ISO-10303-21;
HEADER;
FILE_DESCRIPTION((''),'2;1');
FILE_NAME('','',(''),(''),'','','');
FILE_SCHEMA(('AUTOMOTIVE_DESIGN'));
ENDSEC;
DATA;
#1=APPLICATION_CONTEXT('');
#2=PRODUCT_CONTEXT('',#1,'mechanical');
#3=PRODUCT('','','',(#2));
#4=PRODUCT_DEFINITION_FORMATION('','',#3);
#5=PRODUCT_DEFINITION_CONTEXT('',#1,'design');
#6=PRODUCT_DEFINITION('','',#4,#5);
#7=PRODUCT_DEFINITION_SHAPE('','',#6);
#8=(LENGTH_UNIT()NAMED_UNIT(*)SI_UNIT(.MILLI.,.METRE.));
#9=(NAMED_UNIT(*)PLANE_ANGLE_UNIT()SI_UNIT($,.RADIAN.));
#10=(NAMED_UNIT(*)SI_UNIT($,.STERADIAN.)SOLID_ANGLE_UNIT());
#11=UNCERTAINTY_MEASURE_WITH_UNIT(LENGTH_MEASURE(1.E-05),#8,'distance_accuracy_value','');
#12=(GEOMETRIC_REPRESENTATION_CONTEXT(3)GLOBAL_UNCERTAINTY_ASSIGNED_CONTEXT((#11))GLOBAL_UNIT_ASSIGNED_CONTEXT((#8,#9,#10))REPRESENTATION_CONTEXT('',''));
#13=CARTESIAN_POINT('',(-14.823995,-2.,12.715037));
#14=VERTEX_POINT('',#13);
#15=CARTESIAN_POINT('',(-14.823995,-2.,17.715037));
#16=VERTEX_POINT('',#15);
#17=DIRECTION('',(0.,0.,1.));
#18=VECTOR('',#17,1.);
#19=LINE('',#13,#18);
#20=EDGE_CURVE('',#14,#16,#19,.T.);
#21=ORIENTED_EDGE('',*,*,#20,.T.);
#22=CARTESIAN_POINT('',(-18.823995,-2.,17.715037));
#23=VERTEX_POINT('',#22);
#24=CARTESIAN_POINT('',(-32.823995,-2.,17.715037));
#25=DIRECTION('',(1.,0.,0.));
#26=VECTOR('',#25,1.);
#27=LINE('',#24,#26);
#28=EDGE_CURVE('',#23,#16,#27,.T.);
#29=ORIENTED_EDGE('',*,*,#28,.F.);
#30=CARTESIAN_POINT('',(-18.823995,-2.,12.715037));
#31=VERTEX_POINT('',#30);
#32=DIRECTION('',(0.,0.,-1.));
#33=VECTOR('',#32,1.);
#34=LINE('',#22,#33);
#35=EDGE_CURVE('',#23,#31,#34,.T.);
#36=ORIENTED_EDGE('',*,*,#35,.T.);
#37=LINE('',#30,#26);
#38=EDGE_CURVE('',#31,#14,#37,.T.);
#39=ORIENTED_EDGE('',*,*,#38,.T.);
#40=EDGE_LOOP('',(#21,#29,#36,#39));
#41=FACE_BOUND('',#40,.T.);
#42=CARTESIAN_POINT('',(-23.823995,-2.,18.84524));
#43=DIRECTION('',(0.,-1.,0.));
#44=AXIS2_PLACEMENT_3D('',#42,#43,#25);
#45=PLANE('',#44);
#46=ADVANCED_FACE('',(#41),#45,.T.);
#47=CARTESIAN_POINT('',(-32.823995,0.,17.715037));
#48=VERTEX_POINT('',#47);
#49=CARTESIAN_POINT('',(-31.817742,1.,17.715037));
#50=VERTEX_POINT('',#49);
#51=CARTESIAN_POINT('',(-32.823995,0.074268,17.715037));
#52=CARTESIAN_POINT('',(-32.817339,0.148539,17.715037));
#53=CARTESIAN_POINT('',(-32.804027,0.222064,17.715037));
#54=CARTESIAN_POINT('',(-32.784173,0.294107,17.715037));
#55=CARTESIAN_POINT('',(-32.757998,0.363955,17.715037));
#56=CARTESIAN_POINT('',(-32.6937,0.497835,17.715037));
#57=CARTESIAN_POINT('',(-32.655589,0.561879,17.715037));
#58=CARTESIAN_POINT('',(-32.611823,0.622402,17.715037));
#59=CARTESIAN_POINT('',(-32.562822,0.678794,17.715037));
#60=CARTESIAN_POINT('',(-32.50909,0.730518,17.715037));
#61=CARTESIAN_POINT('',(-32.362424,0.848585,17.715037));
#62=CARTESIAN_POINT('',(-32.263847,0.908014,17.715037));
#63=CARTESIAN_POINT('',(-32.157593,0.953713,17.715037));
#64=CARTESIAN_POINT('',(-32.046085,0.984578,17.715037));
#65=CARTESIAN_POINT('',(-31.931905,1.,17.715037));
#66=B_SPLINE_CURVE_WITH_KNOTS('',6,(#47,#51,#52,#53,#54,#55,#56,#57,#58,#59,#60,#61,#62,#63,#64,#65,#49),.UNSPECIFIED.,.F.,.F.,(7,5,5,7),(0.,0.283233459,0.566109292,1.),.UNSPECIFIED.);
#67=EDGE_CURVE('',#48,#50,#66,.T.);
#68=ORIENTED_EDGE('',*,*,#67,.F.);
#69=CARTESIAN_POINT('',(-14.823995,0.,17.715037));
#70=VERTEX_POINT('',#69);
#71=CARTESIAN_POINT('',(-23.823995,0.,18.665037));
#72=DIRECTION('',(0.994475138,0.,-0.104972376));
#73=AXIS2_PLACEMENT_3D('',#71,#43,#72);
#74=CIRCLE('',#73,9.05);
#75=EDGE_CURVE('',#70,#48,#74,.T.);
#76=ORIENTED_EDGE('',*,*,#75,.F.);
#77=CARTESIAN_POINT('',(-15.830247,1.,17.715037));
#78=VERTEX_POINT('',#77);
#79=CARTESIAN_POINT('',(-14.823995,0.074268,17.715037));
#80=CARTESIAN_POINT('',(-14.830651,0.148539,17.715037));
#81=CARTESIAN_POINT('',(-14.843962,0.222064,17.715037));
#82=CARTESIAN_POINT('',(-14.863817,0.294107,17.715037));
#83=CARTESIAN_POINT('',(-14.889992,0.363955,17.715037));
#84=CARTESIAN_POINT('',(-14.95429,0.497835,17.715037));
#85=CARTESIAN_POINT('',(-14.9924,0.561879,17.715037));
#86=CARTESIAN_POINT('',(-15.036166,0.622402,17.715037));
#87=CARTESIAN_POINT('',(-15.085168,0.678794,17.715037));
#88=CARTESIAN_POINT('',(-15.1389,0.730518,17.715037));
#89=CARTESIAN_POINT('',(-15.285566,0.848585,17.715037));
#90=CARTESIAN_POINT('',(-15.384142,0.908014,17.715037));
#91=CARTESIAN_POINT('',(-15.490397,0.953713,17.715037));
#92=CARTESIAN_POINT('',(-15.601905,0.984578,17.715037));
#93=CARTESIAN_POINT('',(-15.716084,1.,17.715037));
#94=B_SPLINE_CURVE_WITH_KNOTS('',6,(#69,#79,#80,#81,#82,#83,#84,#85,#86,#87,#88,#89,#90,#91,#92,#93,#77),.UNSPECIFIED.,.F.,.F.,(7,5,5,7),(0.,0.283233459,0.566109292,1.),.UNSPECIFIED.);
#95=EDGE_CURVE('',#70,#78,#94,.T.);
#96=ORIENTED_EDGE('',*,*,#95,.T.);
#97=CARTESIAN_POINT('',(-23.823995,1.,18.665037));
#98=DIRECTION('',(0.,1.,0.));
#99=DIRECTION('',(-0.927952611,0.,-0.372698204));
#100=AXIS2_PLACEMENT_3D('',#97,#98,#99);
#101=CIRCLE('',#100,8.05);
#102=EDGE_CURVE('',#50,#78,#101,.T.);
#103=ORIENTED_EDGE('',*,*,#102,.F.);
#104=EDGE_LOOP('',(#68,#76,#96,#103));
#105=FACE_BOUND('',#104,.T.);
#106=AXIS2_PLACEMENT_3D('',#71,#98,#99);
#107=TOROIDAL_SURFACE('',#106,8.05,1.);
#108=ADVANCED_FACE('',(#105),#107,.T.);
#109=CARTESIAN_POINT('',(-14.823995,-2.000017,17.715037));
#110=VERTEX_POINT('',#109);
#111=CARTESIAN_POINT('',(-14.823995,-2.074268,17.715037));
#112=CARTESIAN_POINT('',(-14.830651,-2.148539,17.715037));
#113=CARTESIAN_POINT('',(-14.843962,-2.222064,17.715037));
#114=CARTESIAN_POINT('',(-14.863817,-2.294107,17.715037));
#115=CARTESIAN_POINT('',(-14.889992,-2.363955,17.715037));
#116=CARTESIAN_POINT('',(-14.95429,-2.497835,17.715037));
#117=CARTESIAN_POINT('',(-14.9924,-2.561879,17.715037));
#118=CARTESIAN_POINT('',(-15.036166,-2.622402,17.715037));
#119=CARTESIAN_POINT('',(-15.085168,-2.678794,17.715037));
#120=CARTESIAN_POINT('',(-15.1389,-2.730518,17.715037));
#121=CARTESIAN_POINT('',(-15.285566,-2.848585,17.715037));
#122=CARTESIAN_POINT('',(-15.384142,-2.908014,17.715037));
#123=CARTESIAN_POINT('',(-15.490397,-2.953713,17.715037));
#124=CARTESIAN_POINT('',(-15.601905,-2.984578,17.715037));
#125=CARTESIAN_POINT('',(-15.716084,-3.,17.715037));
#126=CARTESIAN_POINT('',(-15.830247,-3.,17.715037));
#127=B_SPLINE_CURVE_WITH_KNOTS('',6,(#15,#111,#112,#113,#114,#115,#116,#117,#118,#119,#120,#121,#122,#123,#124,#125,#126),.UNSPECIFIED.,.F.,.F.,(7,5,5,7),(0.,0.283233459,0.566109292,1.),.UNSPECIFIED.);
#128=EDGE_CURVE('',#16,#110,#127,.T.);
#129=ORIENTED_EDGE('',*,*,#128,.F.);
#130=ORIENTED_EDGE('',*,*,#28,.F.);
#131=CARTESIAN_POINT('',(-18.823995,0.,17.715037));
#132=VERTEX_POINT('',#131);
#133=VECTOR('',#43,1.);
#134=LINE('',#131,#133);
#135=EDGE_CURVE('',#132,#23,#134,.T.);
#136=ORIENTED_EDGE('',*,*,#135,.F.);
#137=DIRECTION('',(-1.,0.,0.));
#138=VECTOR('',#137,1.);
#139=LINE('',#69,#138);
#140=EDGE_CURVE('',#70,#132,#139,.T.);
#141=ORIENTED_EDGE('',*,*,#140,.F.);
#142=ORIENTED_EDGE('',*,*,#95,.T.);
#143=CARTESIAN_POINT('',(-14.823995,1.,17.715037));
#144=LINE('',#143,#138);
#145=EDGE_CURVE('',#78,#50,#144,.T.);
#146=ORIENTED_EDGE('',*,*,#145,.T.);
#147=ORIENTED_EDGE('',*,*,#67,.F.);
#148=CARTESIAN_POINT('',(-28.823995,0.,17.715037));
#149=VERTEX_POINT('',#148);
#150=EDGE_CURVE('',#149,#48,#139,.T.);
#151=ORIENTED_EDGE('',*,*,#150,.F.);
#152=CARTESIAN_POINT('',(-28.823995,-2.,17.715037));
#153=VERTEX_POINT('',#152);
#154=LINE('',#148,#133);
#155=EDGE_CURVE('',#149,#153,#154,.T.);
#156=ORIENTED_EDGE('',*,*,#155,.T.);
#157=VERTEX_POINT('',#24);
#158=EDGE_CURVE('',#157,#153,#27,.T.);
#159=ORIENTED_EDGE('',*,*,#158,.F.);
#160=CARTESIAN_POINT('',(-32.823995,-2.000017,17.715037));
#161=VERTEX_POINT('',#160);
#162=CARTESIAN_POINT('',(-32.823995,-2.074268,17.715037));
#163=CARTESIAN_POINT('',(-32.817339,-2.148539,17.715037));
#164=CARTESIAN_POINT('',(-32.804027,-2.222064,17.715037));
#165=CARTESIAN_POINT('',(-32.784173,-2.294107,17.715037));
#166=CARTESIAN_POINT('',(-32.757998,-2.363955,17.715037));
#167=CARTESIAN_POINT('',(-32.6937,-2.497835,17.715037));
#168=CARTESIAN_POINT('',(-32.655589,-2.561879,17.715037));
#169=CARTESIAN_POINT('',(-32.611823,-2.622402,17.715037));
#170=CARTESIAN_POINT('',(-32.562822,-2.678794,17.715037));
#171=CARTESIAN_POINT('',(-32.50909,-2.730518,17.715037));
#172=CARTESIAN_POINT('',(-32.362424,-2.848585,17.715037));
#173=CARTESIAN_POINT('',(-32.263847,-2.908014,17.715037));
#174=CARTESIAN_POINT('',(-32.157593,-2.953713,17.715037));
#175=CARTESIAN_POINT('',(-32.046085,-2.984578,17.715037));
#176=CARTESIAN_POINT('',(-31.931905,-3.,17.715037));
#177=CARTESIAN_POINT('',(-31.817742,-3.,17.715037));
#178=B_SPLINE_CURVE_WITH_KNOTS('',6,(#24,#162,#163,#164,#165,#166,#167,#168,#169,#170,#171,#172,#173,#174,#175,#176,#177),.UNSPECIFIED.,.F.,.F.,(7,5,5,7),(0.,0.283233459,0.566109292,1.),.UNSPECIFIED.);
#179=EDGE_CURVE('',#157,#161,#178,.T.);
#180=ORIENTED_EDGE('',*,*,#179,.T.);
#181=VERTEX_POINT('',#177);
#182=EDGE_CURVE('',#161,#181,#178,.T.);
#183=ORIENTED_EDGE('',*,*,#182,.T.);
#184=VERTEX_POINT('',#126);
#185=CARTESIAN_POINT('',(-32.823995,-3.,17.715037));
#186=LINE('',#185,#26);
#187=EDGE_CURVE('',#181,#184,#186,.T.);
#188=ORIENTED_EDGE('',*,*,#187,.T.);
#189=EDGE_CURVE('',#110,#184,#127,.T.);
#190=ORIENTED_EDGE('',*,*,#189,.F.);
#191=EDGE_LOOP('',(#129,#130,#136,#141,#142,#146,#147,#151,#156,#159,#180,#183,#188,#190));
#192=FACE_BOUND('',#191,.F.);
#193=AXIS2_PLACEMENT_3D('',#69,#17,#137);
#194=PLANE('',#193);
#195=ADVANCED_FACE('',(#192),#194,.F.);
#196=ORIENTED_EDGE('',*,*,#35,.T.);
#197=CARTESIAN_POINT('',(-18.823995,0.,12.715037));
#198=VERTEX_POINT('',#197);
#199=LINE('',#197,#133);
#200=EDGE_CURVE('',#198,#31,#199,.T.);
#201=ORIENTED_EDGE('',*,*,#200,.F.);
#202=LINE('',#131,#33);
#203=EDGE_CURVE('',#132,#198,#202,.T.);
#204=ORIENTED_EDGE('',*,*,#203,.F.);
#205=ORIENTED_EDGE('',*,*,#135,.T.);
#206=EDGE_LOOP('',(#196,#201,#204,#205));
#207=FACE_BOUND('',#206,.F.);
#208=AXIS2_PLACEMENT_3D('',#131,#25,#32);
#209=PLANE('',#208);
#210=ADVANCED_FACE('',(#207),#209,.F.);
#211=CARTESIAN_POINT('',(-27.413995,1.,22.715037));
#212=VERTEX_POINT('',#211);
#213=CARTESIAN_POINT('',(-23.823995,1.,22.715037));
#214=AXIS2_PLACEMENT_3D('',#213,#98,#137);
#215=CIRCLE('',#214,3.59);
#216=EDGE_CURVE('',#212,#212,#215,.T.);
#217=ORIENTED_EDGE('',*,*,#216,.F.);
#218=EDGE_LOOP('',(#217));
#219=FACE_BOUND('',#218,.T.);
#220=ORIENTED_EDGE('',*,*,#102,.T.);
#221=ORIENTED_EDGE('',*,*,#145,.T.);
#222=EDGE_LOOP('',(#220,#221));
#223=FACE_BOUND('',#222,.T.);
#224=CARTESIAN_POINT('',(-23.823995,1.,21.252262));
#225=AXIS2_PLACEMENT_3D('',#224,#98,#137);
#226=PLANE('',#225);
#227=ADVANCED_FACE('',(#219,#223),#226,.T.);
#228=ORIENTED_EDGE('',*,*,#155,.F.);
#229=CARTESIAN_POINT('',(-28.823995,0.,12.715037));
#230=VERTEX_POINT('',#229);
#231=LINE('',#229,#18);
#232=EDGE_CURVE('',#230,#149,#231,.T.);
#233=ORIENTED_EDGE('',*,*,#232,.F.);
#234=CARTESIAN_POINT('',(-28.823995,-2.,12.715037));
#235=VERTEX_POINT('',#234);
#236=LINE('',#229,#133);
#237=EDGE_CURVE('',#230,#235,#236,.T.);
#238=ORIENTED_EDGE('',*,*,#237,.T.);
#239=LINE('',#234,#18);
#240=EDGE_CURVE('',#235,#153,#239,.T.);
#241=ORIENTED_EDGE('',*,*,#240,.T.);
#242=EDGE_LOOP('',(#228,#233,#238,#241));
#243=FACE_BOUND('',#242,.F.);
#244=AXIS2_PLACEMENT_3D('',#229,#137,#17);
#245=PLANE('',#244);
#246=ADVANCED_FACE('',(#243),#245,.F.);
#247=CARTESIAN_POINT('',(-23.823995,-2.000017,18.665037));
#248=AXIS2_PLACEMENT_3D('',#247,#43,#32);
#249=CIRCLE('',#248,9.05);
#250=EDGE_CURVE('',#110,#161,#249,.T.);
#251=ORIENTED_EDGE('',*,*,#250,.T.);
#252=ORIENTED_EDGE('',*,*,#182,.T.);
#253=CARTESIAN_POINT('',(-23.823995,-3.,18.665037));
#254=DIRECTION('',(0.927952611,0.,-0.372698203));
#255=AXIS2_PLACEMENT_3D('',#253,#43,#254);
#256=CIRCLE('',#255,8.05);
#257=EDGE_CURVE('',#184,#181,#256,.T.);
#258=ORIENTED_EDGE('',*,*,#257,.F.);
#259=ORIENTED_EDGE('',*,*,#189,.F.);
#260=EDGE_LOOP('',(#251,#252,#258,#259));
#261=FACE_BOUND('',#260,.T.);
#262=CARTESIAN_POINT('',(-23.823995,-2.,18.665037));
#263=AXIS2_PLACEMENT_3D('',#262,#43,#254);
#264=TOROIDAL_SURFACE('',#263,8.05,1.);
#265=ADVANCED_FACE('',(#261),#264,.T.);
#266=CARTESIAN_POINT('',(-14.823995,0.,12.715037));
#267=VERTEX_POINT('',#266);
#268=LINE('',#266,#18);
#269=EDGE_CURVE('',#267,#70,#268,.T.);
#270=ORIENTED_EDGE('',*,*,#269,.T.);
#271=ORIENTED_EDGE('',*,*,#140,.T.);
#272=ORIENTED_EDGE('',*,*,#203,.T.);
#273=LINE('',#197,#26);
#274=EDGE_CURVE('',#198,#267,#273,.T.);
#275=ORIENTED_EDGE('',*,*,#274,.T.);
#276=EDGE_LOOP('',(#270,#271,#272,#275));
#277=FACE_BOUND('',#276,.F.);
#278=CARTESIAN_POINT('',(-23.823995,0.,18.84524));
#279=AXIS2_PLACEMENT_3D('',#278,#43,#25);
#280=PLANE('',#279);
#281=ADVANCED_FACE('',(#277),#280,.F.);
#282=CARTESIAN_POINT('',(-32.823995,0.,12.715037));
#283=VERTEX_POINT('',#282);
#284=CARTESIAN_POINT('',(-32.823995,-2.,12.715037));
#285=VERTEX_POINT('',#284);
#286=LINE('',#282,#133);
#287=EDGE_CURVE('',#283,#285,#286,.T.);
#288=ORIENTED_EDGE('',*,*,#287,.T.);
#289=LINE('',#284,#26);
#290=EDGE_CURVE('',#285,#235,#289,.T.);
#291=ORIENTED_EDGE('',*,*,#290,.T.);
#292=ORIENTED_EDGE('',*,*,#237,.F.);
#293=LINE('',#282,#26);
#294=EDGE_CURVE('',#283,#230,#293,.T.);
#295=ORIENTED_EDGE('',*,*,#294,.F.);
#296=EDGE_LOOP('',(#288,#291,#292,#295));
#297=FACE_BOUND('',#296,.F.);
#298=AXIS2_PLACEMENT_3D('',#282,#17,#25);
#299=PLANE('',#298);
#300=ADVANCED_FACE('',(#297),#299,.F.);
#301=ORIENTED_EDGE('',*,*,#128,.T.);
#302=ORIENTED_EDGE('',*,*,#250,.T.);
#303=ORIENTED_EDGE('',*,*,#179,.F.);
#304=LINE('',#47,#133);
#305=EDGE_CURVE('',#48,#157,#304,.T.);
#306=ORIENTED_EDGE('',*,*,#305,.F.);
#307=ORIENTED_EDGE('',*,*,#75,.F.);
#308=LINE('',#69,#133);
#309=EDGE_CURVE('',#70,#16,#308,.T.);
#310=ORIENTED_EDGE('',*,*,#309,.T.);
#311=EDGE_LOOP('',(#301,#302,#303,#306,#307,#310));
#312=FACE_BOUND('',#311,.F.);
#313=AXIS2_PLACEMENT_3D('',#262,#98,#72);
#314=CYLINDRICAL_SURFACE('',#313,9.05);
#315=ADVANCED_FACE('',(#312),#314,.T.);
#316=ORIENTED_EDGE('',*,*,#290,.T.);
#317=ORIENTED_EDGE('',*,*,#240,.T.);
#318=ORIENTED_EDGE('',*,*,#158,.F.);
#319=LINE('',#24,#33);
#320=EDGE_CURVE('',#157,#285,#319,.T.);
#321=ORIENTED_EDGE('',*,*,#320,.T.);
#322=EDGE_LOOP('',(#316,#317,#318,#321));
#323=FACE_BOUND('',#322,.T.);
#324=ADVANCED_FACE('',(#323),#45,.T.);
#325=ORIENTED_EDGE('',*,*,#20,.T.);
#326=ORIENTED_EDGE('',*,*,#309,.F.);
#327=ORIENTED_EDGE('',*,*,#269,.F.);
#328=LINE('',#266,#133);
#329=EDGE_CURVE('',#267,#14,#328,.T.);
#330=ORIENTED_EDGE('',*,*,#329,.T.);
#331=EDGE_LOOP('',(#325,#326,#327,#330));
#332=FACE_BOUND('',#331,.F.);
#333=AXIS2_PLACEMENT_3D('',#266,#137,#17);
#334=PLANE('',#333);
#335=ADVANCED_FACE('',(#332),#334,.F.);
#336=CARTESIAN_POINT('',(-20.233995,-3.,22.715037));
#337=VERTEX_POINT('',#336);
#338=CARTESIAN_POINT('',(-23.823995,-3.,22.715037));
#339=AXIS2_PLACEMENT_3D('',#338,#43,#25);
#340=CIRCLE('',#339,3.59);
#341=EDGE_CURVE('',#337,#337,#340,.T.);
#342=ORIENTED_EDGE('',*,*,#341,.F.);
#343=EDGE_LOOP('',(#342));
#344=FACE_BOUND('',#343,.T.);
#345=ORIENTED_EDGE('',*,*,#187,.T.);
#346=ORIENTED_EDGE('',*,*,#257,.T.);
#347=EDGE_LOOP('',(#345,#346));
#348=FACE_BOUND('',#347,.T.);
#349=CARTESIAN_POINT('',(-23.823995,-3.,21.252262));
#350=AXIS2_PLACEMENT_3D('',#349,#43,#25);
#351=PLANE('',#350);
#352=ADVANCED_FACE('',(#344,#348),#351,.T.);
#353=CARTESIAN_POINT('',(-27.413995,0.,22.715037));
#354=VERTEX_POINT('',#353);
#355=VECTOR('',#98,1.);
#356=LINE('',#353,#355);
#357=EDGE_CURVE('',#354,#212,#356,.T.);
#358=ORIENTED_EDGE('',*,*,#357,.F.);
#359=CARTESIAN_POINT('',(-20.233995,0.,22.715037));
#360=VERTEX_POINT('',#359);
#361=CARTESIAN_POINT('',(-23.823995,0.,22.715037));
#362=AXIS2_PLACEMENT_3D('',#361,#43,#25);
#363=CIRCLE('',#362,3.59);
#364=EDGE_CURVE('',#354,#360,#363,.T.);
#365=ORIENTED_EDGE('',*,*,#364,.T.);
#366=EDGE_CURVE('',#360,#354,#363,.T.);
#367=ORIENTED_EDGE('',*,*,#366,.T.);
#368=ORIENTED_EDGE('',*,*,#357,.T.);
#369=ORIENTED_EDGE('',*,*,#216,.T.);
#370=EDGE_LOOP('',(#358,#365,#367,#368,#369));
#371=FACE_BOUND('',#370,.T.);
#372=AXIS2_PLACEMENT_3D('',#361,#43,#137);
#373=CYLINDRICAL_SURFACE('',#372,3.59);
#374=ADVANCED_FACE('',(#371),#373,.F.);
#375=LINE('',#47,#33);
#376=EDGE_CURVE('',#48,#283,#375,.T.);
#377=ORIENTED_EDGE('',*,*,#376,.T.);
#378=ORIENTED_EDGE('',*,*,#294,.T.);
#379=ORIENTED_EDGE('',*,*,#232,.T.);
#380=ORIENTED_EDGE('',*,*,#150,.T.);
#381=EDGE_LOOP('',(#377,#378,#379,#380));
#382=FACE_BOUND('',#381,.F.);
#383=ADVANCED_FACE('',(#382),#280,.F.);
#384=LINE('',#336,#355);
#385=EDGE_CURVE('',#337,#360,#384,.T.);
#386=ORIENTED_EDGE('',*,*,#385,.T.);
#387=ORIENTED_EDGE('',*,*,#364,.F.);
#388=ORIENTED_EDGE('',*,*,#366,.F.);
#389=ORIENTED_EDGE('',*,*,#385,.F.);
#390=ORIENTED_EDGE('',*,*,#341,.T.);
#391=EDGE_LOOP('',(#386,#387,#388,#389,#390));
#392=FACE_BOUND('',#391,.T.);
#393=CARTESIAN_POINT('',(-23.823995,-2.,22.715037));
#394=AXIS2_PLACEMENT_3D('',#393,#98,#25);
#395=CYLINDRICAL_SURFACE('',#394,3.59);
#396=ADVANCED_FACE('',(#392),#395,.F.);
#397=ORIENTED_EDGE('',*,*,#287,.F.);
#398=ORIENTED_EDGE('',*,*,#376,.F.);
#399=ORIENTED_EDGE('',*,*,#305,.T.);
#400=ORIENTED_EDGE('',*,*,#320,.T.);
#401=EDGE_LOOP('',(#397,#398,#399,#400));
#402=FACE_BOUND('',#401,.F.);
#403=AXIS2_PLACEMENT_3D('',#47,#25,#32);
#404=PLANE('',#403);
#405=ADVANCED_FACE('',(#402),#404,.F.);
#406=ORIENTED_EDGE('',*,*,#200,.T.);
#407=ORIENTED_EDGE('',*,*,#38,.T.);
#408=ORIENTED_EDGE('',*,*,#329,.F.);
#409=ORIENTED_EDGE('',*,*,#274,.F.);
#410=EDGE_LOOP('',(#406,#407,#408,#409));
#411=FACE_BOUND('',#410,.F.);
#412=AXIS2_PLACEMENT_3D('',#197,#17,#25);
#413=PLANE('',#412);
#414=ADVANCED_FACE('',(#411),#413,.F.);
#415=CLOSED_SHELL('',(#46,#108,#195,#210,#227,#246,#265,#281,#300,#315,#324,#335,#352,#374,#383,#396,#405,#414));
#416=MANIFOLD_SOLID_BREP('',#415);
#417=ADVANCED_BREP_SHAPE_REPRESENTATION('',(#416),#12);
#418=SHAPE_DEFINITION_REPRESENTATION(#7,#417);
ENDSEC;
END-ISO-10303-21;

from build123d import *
from build123d import SkipClean  # not in build123d's __all__

# Parameters (mm, degrees)
F0_R        = 3.59
F1_DEPTH    = 2
F2_R        = 3.59
F3_DEPTH    = 1
F4_R        = 3.59
F5_DEPTH    = 1
F7_T3_ANGLE = 223.7642380541
F7_T6_ANGLE = 223.7642380541


# Not quite as in the source:
# - a fillet or chamfer that OpenCascade refuses, or shapes differently, is made with other operations: its cross-section is extruded or revolved along the edge and cut away or added
# - a feature of the source that left no trace in its solid (it failed there, or was rolled back) is left out


with BuildPart() as f1:
    # F0 (on Front) → F1 (new body)
    with BuildSketch(Plane.XZ):
        with BuildLine():
            Line((-28.8239947557, 12.7150369808), (-28.8239947557, 17.7150369808))
            Line((-28.8239947557, 17.7150369808), (-18.8239947557, 17.7150369808))
            Line((-18.8239947557, 17.7150369808), (-18.8239947557, 12.7150369808))
            Line((-18.8239947557, 12.7150369808), (-14.8239947557, 12.7150369808))
            Line((-14.8239947557, 12.7150369808), (-14.8239947557, 17.7150369808))
            ThreePointArc((-14.8239947557, 17.7150369808), (-23.8239947557, 27.7150369808), (-32.8239947557, 17.7150369808))
            Line((-32.8239947557, 17.7150369808), (-32.8239947557, 12.7150369808))
            Line((-32.8239947557, 12.7150369808), (-28.8239947557, 12.7150369808))
        make_face()
        with Locations((-23.8239947557, 22.7150369808)):
            Circle(F0_R, mode=Mode.SUBTRACT)
    extrude(amount=F1_DEPTH)

    # F2 (on face) → F3 (join)
    with BuildSketch(Plane.XZ.offset(2)):
        with BuildLine():
            Line((-32.8239947557, 17.7150369808), (-28.8239947557, 17.7150369808))
            Line((-28.8239947557, 17.7150369808), (-18.8239947557, 17.7150369808))
            Line((-18.8239947557, 17.7150369808), (-14.8239947557, 17.7150369808))
            ThreePointArc((-14.8239947557, 17.7150369808), (-23.8239947557, 27.7150369808), (-32.8239947557, 17.7150369808))
        make_face()
        with Locations((-23.8239947557, 22.7150369808)):
            Circle(F2_R, mode=Mode.SUBTRACT)
    extrude(amount=F3_DEPTH)

    # F4 (on face) → F5 (join)
    with BuildSketch(Plane(origin=(0, 0, 0), x_dir=(-1, 0, 0), z_dir=(0, 1, 0))):
        with BuildLine():
            Line((14.8239947557, 17.7150369808), (18.8239947557, 17.7150369808))
            Line((18.8239947557, 17.7150369808), (28.8239947557, 17.7150369808))
            Line((28.8239947557, 17.7150369808), (32.8239947557, 17.7150369808))
            ThreePointArc((32.8239947557, 17.7150369808), (23.8239947557, 27.7150369808), (14.8239947557, 17.7150369808))
        make_face()
        with Locations((23.8239947557, 22.7150369808)):
            Circle(F4_R, mode=Mode.SUBTRACT)
    with SkipClean():  # cleaning this boolean's faces spoils the solid; the shape is the same uncleaned
        extrude(amount=F5_DEPTH)

    # F7: fillet of radius 1 on 2 edges, made by hand


with BuildPart() as f7_tool1:
    # F7_s2 → F7_t3 (revolve)
    with BuildSketch(Plane(origin=(3.1459864442, 0, 7.8329498468), x_dir=(0, 1, 0), z_dir=(-0.3726982036, 0, -0.9279526114))):
        with BuildLine():
            ThreePointArc((-2, -20.0139639005), (-2.7071067812, -20.3068571193), (-3, -21.0139639005))
            Line((-3, -21.0139639005), (-3, -20.0139639005))
            Line((-3, -20.0139639005), (-2, -20.0139639005))
        make_face()
    revolve(axis=Axis((-23.8239947557, -3, 18.6650369808), (0, -1, 0)), revolution_arc=F7_T3_ANGLE)


with BuildPart() as f7_tool4:
    # F7_s5 → F7_t6 (revolve)
    with BuildSketch(Plane(origin=(-9.7644804416, 0, 24.3118293528), x_dir=(0, 1, 0), z_dir=(0.3726982036, 0, -0.9279526114))):
        with BuildLine():
            ThreePointArc((0, -24.2011123962), (0.7071067812, -23.9082191774), (1, -23.2011123962))
            Line((1, -23.2011123962), (1, -24.2011123962))
            Line((1, -24.2011123962), (0, -24.2011123962))
        make_face()
    revolve(axis=Axis((-23.8239947557, 1, 18.6650369808), (0, 1, 0)), revolution_arc=F7_T6_ANGLE)


with BuildPart() as f1_1:
    add(f1.part, clean=False)

    # F7_t7: cut F7_tool1, F7_tool4
    add([f7_tool1.part, f7_tool4.part], mode=Mode.SUBTRACT)


solid = f1_1.part
